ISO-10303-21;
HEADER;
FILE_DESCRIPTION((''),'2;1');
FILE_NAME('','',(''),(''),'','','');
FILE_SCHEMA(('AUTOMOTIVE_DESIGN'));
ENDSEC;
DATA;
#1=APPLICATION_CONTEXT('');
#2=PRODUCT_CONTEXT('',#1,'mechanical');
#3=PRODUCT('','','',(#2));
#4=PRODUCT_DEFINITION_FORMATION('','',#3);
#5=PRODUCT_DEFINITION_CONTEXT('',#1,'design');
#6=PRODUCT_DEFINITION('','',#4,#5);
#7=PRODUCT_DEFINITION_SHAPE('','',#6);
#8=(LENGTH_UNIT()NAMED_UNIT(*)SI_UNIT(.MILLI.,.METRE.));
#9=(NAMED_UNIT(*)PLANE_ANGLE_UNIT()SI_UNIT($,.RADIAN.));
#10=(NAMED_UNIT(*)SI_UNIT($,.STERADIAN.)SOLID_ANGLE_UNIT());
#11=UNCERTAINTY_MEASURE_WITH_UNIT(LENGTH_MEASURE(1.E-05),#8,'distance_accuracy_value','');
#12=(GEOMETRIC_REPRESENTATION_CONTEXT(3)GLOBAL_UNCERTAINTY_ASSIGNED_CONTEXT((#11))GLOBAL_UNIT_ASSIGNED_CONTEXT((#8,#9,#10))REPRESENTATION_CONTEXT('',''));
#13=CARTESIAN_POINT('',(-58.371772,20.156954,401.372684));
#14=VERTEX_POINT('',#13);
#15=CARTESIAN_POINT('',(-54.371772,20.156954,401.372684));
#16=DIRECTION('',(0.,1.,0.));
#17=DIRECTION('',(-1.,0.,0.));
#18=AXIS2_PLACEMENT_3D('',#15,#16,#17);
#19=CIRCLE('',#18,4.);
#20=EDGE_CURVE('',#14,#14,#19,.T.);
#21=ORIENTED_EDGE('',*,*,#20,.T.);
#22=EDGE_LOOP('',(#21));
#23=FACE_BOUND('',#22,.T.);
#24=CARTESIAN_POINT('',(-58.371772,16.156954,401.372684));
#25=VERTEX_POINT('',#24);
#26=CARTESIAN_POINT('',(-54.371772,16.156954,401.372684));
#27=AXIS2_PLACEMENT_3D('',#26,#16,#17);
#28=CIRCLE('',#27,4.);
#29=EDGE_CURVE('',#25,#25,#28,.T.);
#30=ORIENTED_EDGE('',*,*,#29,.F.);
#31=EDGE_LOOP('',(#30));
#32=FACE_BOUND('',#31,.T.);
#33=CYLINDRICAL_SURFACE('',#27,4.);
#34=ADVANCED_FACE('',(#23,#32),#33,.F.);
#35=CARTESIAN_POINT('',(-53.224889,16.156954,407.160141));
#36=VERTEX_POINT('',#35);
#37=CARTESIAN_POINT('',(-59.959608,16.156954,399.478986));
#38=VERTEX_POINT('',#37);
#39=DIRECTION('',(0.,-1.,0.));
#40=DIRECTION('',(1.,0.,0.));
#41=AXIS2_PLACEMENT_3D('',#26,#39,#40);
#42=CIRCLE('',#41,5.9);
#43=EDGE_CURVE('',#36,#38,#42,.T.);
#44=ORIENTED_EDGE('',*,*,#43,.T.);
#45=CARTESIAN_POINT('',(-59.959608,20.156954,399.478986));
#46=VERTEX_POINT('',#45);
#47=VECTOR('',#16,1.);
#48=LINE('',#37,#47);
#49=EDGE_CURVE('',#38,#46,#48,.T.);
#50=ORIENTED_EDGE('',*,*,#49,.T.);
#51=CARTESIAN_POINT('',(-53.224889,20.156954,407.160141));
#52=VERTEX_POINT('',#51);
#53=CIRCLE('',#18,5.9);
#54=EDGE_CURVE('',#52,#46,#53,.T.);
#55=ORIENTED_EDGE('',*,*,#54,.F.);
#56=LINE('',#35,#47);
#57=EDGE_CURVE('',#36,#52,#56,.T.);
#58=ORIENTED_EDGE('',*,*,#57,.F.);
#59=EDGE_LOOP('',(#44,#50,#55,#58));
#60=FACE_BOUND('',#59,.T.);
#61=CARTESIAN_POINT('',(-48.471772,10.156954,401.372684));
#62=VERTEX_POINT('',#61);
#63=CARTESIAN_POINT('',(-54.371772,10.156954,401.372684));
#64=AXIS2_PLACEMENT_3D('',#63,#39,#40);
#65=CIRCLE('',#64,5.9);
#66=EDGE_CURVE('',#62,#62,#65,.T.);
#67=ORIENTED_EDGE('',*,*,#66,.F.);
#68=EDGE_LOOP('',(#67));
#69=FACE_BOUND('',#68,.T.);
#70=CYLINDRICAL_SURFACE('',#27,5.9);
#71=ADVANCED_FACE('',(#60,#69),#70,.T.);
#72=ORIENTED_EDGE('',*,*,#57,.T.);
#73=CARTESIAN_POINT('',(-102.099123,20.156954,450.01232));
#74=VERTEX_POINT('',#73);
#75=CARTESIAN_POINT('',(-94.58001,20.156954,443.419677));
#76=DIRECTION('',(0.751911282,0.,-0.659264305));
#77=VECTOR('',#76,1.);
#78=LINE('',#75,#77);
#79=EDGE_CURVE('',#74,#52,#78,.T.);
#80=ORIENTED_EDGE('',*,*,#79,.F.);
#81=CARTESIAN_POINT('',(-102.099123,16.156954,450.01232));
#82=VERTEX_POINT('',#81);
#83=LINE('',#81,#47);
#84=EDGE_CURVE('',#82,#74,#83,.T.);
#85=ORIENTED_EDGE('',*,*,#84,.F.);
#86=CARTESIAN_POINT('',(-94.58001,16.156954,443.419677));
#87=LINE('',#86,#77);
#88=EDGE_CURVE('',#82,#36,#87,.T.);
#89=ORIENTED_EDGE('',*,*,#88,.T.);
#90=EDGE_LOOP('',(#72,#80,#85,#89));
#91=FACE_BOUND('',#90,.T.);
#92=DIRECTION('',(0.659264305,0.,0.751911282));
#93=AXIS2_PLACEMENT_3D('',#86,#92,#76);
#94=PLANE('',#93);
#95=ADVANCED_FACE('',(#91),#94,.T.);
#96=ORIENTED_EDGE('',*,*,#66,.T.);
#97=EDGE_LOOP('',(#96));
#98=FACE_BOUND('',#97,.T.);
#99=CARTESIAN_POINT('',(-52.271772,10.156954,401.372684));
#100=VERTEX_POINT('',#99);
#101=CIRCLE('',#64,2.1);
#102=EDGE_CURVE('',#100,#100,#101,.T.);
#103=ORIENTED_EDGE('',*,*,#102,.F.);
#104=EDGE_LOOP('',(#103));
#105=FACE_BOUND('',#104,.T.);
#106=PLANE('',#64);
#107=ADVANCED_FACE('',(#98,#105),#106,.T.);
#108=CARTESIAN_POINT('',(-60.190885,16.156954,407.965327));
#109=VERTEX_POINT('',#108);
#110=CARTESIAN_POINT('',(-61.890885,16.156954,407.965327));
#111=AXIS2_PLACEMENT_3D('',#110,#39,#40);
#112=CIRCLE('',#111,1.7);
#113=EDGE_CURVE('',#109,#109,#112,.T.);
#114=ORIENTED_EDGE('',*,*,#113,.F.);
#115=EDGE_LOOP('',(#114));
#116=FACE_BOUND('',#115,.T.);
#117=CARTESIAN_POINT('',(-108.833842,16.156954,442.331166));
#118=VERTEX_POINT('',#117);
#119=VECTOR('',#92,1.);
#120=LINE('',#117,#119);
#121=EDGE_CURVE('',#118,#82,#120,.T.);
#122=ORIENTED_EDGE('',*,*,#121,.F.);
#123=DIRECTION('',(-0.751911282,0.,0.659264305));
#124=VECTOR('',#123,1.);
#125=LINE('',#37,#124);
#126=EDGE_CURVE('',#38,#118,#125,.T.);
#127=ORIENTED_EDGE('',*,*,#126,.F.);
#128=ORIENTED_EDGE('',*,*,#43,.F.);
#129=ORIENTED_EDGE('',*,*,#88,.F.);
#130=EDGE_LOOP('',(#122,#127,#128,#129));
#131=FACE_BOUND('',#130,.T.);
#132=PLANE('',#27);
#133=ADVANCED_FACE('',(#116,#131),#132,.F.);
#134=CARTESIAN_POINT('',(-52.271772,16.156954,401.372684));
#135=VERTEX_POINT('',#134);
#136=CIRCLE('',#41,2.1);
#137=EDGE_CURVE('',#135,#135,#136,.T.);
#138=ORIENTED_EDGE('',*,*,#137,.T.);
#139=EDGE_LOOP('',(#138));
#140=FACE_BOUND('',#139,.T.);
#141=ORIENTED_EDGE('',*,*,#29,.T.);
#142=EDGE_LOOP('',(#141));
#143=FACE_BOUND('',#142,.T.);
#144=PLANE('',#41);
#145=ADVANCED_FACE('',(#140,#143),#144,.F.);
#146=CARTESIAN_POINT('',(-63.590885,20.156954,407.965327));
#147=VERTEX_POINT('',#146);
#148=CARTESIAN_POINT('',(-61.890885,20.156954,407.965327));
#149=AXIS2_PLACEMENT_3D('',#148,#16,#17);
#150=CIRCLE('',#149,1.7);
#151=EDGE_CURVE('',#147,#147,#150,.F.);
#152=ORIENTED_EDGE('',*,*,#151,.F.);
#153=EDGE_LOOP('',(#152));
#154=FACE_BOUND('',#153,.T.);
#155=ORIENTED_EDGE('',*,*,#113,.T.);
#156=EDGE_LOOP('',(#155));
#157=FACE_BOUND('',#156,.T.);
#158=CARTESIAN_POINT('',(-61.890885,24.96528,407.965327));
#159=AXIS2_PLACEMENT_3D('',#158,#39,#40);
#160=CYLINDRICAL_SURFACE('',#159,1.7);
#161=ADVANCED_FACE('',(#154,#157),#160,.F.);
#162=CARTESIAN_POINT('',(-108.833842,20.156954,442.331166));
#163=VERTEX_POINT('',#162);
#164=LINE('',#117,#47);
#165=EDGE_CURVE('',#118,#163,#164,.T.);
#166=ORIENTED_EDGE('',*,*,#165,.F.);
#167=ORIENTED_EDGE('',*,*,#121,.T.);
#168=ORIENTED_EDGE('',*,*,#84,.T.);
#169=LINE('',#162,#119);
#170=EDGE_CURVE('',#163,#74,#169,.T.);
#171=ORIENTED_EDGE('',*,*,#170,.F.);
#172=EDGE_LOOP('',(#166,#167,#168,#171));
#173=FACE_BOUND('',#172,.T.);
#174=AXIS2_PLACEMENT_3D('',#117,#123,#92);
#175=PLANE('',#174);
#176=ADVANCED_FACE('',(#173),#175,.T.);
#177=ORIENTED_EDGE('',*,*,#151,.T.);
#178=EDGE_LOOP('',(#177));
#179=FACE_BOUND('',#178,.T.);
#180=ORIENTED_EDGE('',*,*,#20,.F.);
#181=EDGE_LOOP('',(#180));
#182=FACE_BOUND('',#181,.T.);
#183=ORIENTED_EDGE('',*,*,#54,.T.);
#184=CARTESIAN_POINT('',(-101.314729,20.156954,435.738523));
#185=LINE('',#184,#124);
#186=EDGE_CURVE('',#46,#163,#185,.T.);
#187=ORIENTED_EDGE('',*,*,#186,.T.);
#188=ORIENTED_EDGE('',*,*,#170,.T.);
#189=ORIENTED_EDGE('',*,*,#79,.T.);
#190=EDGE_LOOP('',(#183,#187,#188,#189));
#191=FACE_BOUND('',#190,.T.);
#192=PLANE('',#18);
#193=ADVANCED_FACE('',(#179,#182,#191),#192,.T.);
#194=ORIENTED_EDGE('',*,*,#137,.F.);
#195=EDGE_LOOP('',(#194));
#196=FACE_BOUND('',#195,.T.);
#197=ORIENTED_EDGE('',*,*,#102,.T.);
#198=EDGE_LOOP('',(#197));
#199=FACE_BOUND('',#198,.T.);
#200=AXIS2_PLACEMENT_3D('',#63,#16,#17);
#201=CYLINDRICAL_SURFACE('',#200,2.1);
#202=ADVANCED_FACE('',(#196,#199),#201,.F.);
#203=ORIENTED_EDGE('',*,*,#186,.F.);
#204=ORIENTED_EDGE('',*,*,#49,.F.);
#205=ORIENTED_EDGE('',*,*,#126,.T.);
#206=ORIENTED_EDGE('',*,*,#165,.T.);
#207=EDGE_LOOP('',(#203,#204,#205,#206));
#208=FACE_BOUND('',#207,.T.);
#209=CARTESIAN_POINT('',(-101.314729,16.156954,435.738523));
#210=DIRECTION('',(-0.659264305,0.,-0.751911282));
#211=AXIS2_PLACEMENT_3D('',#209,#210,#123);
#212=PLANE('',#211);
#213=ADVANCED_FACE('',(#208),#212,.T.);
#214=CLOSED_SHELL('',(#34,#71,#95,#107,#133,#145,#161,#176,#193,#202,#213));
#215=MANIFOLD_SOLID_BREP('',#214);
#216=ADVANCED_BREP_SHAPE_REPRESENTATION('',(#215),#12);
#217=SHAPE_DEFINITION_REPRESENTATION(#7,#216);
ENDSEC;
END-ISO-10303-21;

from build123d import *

# Parameters (mm, degrees)
EXTRUDE_START       = -4
EXTRUDE_1_OUTLINE_R = 4
EXTRUDE_1_DEPTH     = 4
EXTRUDE_START_2     = 6
SKETCH_2_R          = 5.9
SKETCH_2_R_2        = 2.1
EXTRUDE_2_DEPTH     = 6
SKETCH_3_R          = 1.7
CUT_EXTRUDE_1_DEPTH = 4


# Read off the part's stored shape, not the designer's step: 填料-伸長1
with BuildPart() as part:
    # 填料-伸長1 outline → 填料-伸長1 (new body)
    with BuildSketch(Plane(origin=(0, 20.156954032, 0), x_dir=(1, 0, 0), z_dir=(0, 1, 0)).offset(EXTRUDE_START)):
        with BuildLine():
            Line((-102.099122719, -450.012320429), (-53.224889363, -407.160140626))
            ThreePointArc((-53.224889363, -407.160140626), (-49.935495794, -397.483024153), (-59.959608209, -399.47898597))
            Line((-59.959608209, -399.47898597), (-108.833841565, -442.331165772))
            Line((-108.833841565, -442.331165772), (-102.099122719, -450.012320429))
        make_face()
        with Locations((-54.371772361, -401.372683552)):
            Circle(EXTRUDE_1_OUTLINE_R, mode=Mode.SUBTRACT)
    extrude(amount=EXTRUDE_1_DEPTH)

    # 草圖2 → 填料-伸長2 (add)
    with BuildSketch(Plane.XZ.offset(-16.156954032).offset(EXTRUDE_START_2)):
        with Locations(Location((-54.371772361, 401.372683552, 0), (0, 0, 198.721335886))):
            Circle(SKETCH_2_R)
        with Locations((-54.371772361, 401.372683552)):
            Circle(SKETCH_2_R_2, mode=Mode.SUBTRACT)
    extrude(amount=-EXTRUDE_2_DEPTH)

    # 草圖3 → 除料-伸長1 (cut)
    with BuildSketch(Plane.XZ.offset(-16.156954032)):
        with Locations((-61.890885185, 407.965326598)):
            Circle(SKETCH_3_R)
    extrude(amount=-CUT_EXTRUDE_1_DEPTH, mode=Mode.SUBTRACT)


solid = part.part
